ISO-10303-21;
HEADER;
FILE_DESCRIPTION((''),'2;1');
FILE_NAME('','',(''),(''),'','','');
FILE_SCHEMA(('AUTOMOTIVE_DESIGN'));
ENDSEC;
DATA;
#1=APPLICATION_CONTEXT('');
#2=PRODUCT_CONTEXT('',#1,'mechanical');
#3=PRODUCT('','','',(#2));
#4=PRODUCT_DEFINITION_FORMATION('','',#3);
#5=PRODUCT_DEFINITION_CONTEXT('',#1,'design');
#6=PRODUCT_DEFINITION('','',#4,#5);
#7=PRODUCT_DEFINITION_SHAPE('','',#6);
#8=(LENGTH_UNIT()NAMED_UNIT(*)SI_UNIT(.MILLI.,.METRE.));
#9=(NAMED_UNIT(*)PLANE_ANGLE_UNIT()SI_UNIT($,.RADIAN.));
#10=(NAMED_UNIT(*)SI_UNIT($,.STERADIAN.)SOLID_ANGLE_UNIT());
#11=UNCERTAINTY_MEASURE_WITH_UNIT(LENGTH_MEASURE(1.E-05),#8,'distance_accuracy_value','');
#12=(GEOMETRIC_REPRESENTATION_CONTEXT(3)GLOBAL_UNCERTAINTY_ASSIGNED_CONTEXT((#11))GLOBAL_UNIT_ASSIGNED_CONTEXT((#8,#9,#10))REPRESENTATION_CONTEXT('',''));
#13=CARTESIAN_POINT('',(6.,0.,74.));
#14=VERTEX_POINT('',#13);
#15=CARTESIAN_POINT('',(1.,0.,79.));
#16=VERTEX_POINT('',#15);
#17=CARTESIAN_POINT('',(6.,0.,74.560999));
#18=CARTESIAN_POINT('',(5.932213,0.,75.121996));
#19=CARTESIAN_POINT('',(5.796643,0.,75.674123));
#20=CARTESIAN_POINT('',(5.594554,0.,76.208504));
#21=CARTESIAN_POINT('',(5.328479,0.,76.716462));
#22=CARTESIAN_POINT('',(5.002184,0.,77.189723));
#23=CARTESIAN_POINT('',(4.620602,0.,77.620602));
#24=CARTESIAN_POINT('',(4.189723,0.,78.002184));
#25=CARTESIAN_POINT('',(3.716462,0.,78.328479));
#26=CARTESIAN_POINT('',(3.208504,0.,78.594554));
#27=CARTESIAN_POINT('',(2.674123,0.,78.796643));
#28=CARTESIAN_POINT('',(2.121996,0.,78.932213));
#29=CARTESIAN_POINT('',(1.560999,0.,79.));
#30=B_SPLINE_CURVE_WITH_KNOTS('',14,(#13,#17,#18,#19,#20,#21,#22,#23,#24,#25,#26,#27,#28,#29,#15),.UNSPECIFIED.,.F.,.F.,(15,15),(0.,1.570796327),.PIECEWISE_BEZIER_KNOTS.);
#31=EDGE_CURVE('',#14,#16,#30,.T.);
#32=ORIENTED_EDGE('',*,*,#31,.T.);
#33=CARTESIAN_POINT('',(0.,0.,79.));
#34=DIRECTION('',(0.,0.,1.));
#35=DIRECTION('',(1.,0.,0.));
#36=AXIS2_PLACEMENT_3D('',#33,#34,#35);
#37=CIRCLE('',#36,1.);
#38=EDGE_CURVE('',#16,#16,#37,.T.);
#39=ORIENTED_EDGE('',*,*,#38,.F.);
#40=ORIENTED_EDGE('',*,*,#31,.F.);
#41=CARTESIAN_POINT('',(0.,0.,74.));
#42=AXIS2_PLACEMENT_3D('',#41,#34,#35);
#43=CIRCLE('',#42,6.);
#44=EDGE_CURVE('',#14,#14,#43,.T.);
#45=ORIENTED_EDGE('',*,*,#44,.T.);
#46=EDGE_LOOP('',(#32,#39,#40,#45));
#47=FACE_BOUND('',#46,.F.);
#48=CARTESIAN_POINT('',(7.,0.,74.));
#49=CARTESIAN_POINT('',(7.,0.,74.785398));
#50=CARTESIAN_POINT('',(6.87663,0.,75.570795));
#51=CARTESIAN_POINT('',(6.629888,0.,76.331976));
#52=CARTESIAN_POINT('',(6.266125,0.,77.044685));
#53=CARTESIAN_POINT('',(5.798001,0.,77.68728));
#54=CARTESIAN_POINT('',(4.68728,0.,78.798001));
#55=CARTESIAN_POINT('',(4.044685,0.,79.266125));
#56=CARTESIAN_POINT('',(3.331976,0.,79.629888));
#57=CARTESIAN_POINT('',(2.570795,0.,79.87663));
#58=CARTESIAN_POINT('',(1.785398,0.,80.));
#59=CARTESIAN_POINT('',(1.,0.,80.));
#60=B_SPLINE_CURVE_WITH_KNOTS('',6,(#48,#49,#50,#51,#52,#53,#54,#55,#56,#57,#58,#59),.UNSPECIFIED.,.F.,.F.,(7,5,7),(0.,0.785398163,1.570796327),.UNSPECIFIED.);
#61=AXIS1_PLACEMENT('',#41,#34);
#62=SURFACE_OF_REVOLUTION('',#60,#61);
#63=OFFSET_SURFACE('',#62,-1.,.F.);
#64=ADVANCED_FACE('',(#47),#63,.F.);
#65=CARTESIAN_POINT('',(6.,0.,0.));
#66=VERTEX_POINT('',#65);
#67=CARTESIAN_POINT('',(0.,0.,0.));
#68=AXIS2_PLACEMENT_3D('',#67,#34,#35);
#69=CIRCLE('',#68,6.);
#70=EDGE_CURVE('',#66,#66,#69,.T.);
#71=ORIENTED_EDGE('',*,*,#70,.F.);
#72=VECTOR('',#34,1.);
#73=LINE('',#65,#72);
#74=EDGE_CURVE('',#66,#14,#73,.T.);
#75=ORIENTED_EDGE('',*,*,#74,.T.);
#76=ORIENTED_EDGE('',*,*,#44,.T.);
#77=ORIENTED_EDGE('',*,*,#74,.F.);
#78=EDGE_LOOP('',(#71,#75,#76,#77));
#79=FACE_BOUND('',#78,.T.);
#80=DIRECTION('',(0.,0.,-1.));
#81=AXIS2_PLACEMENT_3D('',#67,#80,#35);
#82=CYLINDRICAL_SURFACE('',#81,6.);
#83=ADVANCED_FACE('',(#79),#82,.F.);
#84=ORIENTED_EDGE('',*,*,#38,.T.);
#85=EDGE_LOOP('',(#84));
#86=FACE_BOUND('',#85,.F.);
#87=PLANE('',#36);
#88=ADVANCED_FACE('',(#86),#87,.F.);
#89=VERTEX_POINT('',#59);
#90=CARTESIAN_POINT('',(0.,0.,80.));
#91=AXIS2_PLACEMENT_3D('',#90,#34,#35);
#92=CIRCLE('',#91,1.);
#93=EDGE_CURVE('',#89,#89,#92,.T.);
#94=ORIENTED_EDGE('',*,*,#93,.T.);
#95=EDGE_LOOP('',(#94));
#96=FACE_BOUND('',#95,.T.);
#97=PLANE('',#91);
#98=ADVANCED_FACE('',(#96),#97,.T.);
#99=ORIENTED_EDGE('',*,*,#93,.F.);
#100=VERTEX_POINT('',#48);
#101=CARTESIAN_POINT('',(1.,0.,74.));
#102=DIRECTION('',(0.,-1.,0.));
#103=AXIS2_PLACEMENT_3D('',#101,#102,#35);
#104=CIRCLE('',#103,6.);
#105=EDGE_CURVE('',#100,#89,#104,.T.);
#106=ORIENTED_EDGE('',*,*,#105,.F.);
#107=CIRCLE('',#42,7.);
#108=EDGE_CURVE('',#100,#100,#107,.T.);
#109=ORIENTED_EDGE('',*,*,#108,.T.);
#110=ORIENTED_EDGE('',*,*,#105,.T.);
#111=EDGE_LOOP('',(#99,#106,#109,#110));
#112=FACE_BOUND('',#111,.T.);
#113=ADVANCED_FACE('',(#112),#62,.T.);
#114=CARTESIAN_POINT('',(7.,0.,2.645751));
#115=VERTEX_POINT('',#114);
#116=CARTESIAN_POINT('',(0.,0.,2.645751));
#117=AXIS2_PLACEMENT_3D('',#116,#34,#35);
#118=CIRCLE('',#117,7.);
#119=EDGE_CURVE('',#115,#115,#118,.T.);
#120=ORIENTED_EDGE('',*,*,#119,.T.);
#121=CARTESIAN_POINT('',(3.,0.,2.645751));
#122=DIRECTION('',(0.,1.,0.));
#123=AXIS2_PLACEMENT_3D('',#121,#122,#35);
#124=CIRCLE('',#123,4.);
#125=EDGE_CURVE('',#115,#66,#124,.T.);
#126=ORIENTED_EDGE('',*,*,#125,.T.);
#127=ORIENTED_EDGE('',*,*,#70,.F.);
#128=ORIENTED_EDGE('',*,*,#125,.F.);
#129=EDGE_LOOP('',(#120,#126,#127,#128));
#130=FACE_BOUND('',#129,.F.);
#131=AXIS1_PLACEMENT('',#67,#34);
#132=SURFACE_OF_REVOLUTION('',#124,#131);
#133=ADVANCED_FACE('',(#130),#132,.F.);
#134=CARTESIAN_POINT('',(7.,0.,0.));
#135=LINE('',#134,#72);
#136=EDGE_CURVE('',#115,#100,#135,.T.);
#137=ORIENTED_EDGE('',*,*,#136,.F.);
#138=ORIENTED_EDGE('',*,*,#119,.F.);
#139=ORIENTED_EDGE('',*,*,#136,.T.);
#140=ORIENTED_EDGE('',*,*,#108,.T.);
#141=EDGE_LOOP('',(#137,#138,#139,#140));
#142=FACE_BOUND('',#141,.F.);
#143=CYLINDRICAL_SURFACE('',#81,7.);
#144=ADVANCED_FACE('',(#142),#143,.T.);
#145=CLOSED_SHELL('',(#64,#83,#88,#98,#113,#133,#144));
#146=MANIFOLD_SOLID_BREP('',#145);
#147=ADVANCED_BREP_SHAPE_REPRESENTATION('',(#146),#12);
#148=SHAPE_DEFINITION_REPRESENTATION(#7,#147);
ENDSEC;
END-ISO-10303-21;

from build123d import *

# Parameters (mm, degrees)
F0_R     = 7
F1_DEPTH = 80
F2_R     = 6
F3_T     = -1


# Not quite as in the source:
# - a fillet or chamfer that OpenCascade refuses, or shapes differently, is made with other operations: its cross-section is extruded or revolved along the edge and cut away or added


with BuildPart() as f1:
    # F0 (on Top) → F1 (new body)
    with BuildSketch(Plane.XY):
        Circle(F0_R)
    extrude(amount=F1_DEPTH)

    # F2
    f2_edges = [f1.edges().sort_by_distance(p)[0] for p in [
        (-7, 0, 80),
    ]]
    fillet(f2_edges, radius=F2_R)

    # F3
    f3_openings = [f1.faces().sort_by_distance(p)[0] for p in [
        (0, 0, 0),
    ]]
    offset(amount=F3_T, openings=f3_openings)

    # F4: fillet of radius 4 on 1 edges, made by hand

    # F4_s1 → F4_t2 (revolve, cut)
    with BuildSketch(Plane.XZ):
        with BuildLine():
            ThreePointArc((7, 2.6457513111), (6.7416573868, 1.2315377487), (6, 0))
            Line((6, 0), (7, 0))
            Line((7, 0), (7, 2.6457513111))
        make_face()
    revolve(axis=Axis((0, 0, 0), (0, 0, 1)), mode=Mode.SUBTRACT)


solid = f1.part
